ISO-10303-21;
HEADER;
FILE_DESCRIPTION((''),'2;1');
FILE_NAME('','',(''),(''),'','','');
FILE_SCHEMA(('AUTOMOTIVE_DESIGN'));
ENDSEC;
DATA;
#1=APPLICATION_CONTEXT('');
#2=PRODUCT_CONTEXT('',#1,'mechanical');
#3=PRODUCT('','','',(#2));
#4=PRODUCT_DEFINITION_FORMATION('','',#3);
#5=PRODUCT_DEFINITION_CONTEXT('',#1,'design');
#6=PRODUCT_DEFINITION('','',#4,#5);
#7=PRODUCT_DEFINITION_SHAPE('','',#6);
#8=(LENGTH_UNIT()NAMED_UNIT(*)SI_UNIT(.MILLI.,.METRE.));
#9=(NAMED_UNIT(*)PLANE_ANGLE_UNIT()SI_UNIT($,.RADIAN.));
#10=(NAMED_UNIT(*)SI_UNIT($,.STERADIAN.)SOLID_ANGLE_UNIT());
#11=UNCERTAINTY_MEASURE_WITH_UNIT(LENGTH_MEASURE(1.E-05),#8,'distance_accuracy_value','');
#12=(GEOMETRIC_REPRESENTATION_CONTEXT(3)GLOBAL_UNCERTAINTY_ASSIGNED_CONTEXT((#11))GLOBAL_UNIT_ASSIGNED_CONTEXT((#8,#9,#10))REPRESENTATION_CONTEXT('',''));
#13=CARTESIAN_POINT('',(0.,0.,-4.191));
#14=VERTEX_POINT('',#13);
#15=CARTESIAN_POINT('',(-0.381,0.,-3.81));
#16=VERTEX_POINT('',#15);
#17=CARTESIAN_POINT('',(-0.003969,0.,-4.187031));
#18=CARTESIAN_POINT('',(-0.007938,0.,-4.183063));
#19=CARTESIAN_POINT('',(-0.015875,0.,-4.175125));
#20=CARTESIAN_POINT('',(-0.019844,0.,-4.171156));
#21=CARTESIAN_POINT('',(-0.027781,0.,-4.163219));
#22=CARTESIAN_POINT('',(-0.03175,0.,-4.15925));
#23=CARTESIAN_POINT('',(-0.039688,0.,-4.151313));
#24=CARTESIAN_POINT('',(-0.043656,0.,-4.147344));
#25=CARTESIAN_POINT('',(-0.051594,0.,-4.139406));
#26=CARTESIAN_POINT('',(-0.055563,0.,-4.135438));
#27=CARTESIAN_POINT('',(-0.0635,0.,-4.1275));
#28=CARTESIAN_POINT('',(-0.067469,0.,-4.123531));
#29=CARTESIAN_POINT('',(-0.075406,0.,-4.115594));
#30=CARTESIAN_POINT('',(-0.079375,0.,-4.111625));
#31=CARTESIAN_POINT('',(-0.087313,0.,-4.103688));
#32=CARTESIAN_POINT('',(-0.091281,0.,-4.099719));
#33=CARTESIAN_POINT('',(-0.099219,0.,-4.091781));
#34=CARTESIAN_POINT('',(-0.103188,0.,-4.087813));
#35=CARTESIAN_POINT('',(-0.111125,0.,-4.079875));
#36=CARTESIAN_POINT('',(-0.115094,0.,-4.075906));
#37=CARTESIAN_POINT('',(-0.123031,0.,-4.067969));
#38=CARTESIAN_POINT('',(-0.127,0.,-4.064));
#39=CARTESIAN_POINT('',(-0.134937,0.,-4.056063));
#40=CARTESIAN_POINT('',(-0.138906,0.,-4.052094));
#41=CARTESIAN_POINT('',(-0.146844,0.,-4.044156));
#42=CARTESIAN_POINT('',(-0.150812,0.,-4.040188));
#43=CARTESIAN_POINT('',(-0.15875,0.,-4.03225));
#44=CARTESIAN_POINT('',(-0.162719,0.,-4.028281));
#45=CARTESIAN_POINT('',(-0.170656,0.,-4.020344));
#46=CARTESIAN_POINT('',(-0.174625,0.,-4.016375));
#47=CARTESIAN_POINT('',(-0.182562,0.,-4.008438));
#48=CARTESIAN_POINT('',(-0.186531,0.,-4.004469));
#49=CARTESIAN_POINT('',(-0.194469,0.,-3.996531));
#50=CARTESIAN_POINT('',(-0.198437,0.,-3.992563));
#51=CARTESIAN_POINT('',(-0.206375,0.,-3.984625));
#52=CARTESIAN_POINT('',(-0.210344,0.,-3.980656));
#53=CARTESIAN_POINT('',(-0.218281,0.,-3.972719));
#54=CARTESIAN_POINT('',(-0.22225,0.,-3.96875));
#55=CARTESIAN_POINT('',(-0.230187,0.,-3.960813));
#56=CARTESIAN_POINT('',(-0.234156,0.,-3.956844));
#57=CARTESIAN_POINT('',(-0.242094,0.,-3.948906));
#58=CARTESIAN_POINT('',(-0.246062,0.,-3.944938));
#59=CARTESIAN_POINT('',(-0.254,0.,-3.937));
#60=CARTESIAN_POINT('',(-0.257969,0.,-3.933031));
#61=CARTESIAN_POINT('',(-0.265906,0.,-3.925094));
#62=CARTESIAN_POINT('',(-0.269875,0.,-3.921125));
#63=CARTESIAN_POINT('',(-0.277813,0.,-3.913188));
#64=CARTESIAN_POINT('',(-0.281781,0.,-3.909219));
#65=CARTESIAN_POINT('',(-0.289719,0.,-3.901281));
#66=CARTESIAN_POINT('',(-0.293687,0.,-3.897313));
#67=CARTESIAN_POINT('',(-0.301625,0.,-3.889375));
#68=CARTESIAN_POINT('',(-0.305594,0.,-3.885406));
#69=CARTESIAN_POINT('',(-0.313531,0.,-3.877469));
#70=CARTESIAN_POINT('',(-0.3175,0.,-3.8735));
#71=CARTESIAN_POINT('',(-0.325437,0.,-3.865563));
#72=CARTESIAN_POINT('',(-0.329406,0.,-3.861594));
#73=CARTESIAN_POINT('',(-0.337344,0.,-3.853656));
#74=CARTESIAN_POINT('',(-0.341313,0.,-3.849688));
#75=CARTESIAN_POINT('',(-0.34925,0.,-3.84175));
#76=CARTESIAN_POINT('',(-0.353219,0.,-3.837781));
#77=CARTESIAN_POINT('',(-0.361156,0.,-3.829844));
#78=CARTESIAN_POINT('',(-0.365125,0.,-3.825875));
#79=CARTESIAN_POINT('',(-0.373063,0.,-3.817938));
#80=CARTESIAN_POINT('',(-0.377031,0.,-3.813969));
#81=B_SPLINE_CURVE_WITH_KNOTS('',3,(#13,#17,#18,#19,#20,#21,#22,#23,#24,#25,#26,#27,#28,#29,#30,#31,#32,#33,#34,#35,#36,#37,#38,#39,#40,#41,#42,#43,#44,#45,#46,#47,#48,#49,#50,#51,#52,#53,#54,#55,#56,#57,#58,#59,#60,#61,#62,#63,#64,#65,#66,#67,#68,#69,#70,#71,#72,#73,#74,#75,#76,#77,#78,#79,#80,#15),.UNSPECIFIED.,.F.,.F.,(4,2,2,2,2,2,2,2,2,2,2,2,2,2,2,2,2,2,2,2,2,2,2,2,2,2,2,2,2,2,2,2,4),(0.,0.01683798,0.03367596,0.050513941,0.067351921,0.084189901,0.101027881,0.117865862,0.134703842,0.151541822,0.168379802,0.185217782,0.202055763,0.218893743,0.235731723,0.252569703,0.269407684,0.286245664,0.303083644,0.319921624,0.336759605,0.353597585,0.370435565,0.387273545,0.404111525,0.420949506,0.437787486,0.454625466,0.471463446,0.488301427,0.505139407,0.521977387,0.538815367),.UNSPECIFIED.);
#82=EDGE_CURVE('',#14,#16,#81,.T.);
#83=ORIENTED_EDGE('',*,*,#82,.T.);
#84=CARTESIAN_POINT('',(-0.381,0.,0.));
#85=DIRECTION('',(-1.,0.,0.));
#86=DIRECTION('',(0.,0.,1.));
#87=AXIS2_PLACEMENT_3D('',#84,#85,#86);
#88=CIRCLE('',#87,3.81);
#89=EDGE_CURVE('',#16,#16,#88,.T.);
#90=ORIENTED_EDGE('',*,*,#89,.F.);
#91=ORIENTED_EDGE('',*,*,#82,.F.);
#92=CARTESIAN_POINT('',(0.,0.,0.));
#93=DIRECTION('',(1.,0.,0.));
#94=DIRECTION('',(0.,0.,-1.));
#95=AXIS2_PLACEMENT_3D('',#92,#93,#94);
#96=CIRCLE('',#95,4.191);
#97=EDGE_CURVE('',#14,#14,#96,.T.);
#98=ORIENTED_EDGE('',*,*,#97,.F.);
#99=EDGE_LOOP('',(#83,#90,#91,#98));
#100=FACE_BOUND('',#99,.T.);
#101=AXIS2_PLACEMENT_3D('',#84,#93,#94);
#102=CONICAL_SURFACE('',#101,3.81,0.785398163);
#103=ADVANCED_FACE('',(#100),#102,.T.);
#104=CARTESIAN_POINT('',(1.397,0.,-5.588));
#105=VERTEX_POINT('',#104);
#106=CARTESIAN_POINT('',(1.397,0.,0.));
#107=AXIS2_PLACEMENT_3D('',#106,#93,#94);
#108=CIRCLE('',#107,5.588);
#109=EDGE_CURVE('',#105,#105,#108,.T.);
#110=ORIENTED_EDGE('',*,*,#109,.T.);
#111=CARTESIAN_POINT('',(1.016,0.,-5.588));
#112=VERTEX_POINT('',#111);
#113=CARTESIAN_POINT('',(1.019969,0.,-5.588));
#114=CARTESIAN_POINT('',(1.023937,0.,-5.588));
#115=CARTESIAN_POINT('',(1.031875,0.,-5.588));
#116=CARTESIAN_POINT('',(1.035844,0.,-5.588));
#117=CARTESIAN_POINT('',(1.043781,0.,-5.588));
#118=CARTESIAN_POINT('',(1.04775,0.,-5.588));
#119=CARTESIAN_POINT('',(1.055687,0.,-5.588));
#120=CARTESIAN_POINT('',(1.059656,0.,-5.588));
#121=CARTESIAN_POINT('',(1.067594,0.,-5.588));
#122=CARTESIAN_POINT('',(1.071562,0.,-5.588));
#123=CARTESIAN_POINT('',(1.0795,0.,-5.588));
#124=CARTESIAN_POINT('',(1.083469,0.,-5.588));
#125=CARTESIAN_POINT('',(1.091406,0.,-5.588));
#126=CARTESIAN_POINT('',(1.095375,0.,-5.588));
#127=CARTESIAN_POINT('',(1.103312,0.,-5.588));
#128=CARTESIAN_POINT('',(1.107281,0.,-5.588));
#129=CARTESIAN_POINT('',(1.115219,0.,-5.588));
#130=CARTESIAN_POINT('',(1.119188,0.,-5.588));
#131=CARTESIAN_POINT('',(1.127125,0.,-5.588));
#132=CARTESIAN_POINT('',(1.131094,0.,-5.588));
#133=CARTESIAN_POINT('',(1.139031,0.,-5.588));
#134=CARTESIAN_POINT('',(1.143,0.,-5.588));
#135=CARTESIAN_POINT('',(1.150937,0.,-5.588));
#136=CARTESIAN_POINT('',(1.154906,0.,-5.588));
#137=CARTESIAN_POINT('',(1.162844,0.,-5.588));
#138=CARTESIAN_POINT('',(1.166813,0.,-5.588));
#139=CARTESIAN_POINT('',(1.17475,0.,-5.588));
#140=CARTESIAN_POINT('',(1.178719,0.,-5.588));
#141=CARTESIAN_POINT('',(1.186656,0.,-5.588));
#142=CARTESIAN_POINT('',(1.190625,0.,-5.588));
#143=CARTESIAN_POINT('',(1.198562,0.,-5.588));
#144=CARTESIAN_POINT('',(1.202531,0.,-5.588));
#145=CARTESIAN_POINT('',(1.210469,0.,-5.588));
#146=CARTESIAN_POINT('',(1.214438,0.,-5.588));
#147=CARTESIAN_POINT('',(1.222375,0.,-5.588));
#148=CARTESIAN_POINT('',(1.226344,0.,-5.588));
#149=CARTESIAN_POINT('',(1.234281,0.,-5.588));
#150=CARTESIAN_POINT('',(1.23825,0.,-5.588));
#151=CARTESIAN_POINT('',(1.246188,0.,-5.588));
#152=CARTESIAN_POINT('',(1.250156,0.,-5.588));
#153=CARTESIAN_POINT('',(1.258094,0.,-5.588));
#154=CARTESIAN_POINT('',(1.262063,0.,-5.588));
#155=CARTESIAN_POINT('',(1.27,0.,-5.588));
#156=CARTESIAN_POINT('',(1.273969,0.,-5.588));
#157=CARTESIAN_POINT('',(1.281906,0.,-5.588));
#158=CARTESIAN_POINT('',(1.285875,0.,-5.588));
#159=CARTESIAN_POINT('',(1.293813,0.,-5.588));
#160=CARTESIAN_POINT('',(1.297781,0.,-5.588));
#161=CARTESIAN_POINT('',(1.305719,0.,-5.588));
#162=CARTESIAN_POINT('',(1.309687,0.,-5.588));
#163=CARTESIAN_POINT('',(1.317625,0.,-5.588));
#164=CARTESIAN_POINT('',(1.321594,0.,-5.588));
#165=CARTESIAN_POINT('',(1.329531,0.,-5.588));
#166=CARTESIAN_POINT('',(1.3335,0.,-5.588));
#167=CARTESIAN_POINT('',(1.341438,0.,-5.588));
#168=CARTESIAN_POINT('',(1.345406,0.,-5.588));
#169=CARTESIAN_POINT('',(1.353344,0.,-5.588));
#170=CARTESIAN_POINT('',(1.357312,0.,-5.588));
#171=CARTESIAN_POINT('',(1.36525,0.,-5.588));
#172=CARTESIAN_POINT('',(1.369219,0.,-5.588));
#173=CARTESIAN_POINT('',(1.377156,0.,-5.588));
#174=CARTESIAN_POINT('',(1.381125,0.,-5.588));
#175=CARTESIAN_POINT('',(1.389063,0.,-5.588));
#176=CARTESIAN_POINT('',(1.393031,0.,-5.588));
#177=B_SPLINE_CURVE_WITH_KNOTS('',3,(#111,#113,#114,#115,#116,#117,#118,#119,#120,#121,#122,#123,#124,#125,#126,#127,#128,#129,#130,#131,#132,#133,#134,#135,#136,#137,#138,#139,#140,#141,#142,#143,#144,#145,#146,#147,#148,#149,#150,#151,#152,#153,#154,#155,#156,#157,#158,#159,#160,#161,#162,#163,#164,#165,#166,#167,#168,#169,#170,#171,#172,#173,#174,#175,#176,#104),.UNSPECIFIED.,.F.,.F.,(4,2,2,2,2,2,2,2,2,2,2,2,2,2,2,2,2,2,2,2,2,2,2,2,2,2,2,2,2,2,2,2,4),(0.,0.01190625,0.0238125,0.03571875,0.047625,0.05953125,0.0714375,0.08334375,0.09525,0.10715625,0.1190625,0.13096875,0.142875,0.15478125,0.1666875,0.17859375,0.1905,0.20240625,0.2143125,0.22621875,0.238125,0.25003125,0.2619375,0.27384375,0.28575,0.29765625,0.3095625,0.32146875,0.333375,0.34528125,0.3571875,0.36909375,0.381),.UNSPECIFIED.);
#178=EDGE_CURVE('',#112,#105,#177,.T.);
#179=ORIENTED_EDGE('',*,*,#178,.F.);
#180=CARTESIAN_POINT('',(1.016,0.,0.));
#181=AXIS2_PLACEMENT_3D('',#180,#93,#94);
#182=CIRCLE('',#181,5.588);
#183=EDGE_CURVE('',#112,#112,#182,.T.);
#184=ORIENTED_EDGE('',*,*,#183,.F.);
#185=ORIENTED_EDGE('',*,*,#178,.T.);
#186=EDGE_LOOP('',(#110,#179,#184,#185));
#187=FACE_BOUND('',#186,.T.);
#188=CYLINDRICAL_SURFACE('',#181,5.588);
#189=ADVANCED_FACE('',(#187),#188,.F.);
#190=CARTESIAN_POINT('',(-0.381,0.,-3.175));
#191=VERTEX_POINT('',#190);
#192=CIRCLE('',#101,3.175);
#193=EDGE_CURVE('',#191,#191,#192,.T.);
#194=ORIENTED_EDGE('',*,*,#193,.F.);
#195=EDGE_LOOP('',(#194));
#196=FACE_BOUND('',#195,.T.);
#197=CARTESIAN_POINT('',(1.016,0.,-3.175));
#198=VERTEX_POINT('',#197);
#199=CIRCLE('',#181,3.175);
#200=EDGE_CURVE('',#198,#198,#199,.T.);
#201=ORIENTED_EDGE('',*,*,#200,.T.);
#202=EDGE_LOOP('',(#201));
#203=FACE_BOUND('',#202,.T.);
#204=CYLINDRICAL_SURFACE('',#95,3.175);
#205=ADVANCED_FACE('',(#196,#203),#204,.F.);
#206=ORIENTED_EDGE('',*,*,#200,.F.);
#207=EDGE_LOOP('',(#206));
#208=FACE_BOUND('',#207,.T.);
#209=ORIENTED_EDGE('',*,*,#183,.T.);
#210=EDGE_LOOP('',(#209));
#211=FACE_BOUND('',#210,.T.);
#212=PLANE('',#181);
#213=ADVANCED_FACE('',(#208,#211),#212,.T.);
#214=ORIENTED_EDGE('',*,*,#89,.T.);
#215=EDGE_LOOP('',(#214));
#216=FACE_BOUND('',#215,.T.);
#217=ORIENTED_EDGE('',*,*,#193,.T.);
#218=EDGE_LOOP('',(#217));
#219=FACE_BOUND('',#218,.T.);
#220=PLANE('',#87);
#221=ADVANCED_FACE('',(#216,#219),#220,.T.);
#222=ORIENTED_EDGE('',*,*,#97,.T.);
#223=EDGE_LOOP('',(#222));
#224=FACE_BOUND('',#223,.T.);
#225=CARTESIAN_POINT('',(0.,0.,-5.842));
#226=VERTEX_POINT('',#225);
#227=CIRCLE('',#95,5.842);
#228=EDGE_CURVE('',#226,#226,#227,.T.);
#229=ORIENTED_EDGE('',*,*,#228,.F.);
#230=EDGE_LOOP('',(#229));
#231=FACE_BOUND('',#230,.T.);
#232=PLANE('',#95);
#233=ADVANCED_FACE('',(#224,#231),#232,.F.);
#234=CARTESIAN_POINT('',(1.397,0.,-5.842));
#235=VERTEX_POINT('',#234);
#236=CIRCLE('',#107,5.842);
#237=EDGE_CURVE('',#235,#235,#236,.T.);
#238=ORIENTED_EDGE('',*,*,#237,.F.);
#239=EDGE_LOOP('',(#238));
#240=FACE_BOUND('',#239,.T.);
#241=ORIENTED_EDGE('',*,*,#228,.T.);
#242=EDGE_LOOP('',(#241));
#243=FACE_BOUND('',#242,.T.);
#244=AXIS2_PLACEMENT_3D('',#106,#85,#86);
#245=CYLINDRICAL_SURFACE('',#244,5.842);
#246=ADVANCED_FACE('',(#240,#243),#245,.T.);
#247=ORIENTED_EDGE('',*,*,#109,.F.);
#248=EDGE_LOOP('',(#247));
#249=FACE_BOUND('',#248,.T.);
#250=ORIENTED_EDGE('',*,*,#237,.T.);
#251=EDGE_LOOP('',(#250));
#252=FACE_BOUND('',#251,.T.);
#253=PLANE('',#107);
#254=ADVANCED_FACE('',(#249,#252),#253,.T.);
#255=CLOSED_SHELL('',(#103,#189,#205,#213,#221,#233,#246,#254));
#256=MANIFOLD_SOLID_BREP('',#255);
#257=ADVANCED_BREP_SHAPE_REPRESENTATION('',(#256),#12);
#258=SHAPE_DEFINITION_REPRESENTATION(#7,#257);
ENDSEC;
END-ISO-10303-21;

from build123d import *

# Parameters (mm, degrees)
SKETCH1_R           = 5.842
BOSS_EXTRUDE1_DEPTH = 1.397
SKETCH2_R           = 5.588
CUT_EXTRUDE1_DEPTH  = 0.381
SKETCH3_R           = 3.175
CUT_EXTRUDE2_DEPTH  = 9.324072561
SKETCH4_R           = 3.81
BOSS_EXTRUDE2_DEPTH = 0.381
CHAMFER1_SIZE       = 0.381
SKETCH5_R           = 3.175
CUT_EXTRUDE3_DEPTH  = 9.379113139


with BuildPart() as part:
    # Sketch1 → Boss-Extrude1 (new body)
    with BuildSketch(Plane(origin=(0, 0, 0), x_dir=(0, 0, -1), z_dir=(1, 0, 0))):
        Circle(SKETCH1_R)
    extrude(amount=BOSS_EXTRUDE1_DEPTH)

    # Sketch2 → Cut-Extrude1 (cut)
    with BuildSketch(Plane(origin=(1.397, 0, 0), x_dir=(0, 0, -1), z_dir=(1, 0, 0))):
        Circle(SKETCH2_R)
    extrude(amount=-CUT_EXTRUDE1_DEPTH, mode=Mode.SUBTRACT)

    # Sketch3 → Cut-Extrude2 (cut, through all)
    with BuildSketch(Plane(origin=(1.016, 0, 0), x_dir=(0, 0, -1), z_dir=(1, 0, 0))):
        Circle(SKETCH3_R)
    extrude(amount=-CUT_EXTRUDE2_DEPTH, mode=Mode.SUBTRACT)

    # Sketch4 → Boss-Extrude2 (add)
    with BuildSketch(Plane.ZY):
        with Locations(Location((0, 0, 0), (0, 0, 180))):
            Circle(SKETCH4_R)
    extrude(amount=BOSS_EXTRUDE2_DEPTH)

    # Chamfer1
    chamfer1_edges = [part.edges().sort_by_distance(p)[0] for p in [
        (0, 0, 3.81),
    ]]
    chamfer(chamfer1_edges, length=CHAMFER1_SIZE - 0.0001)  # a hair under: the kernel refuses the full size

    # Sketch5 → Cut-Extrude3 (cut, through all)
    with BuildSketch(Plane(origin=(0, 0, 0), x_dir=(0, 0, -1), z_dir=(1, 0, 0))):
        Circle(SKETCH5_R)
    extrude(amount=-CUT_EXTRUDE3_DEPTH, mode=Mode.SUBTRACT)


solid = part.part
